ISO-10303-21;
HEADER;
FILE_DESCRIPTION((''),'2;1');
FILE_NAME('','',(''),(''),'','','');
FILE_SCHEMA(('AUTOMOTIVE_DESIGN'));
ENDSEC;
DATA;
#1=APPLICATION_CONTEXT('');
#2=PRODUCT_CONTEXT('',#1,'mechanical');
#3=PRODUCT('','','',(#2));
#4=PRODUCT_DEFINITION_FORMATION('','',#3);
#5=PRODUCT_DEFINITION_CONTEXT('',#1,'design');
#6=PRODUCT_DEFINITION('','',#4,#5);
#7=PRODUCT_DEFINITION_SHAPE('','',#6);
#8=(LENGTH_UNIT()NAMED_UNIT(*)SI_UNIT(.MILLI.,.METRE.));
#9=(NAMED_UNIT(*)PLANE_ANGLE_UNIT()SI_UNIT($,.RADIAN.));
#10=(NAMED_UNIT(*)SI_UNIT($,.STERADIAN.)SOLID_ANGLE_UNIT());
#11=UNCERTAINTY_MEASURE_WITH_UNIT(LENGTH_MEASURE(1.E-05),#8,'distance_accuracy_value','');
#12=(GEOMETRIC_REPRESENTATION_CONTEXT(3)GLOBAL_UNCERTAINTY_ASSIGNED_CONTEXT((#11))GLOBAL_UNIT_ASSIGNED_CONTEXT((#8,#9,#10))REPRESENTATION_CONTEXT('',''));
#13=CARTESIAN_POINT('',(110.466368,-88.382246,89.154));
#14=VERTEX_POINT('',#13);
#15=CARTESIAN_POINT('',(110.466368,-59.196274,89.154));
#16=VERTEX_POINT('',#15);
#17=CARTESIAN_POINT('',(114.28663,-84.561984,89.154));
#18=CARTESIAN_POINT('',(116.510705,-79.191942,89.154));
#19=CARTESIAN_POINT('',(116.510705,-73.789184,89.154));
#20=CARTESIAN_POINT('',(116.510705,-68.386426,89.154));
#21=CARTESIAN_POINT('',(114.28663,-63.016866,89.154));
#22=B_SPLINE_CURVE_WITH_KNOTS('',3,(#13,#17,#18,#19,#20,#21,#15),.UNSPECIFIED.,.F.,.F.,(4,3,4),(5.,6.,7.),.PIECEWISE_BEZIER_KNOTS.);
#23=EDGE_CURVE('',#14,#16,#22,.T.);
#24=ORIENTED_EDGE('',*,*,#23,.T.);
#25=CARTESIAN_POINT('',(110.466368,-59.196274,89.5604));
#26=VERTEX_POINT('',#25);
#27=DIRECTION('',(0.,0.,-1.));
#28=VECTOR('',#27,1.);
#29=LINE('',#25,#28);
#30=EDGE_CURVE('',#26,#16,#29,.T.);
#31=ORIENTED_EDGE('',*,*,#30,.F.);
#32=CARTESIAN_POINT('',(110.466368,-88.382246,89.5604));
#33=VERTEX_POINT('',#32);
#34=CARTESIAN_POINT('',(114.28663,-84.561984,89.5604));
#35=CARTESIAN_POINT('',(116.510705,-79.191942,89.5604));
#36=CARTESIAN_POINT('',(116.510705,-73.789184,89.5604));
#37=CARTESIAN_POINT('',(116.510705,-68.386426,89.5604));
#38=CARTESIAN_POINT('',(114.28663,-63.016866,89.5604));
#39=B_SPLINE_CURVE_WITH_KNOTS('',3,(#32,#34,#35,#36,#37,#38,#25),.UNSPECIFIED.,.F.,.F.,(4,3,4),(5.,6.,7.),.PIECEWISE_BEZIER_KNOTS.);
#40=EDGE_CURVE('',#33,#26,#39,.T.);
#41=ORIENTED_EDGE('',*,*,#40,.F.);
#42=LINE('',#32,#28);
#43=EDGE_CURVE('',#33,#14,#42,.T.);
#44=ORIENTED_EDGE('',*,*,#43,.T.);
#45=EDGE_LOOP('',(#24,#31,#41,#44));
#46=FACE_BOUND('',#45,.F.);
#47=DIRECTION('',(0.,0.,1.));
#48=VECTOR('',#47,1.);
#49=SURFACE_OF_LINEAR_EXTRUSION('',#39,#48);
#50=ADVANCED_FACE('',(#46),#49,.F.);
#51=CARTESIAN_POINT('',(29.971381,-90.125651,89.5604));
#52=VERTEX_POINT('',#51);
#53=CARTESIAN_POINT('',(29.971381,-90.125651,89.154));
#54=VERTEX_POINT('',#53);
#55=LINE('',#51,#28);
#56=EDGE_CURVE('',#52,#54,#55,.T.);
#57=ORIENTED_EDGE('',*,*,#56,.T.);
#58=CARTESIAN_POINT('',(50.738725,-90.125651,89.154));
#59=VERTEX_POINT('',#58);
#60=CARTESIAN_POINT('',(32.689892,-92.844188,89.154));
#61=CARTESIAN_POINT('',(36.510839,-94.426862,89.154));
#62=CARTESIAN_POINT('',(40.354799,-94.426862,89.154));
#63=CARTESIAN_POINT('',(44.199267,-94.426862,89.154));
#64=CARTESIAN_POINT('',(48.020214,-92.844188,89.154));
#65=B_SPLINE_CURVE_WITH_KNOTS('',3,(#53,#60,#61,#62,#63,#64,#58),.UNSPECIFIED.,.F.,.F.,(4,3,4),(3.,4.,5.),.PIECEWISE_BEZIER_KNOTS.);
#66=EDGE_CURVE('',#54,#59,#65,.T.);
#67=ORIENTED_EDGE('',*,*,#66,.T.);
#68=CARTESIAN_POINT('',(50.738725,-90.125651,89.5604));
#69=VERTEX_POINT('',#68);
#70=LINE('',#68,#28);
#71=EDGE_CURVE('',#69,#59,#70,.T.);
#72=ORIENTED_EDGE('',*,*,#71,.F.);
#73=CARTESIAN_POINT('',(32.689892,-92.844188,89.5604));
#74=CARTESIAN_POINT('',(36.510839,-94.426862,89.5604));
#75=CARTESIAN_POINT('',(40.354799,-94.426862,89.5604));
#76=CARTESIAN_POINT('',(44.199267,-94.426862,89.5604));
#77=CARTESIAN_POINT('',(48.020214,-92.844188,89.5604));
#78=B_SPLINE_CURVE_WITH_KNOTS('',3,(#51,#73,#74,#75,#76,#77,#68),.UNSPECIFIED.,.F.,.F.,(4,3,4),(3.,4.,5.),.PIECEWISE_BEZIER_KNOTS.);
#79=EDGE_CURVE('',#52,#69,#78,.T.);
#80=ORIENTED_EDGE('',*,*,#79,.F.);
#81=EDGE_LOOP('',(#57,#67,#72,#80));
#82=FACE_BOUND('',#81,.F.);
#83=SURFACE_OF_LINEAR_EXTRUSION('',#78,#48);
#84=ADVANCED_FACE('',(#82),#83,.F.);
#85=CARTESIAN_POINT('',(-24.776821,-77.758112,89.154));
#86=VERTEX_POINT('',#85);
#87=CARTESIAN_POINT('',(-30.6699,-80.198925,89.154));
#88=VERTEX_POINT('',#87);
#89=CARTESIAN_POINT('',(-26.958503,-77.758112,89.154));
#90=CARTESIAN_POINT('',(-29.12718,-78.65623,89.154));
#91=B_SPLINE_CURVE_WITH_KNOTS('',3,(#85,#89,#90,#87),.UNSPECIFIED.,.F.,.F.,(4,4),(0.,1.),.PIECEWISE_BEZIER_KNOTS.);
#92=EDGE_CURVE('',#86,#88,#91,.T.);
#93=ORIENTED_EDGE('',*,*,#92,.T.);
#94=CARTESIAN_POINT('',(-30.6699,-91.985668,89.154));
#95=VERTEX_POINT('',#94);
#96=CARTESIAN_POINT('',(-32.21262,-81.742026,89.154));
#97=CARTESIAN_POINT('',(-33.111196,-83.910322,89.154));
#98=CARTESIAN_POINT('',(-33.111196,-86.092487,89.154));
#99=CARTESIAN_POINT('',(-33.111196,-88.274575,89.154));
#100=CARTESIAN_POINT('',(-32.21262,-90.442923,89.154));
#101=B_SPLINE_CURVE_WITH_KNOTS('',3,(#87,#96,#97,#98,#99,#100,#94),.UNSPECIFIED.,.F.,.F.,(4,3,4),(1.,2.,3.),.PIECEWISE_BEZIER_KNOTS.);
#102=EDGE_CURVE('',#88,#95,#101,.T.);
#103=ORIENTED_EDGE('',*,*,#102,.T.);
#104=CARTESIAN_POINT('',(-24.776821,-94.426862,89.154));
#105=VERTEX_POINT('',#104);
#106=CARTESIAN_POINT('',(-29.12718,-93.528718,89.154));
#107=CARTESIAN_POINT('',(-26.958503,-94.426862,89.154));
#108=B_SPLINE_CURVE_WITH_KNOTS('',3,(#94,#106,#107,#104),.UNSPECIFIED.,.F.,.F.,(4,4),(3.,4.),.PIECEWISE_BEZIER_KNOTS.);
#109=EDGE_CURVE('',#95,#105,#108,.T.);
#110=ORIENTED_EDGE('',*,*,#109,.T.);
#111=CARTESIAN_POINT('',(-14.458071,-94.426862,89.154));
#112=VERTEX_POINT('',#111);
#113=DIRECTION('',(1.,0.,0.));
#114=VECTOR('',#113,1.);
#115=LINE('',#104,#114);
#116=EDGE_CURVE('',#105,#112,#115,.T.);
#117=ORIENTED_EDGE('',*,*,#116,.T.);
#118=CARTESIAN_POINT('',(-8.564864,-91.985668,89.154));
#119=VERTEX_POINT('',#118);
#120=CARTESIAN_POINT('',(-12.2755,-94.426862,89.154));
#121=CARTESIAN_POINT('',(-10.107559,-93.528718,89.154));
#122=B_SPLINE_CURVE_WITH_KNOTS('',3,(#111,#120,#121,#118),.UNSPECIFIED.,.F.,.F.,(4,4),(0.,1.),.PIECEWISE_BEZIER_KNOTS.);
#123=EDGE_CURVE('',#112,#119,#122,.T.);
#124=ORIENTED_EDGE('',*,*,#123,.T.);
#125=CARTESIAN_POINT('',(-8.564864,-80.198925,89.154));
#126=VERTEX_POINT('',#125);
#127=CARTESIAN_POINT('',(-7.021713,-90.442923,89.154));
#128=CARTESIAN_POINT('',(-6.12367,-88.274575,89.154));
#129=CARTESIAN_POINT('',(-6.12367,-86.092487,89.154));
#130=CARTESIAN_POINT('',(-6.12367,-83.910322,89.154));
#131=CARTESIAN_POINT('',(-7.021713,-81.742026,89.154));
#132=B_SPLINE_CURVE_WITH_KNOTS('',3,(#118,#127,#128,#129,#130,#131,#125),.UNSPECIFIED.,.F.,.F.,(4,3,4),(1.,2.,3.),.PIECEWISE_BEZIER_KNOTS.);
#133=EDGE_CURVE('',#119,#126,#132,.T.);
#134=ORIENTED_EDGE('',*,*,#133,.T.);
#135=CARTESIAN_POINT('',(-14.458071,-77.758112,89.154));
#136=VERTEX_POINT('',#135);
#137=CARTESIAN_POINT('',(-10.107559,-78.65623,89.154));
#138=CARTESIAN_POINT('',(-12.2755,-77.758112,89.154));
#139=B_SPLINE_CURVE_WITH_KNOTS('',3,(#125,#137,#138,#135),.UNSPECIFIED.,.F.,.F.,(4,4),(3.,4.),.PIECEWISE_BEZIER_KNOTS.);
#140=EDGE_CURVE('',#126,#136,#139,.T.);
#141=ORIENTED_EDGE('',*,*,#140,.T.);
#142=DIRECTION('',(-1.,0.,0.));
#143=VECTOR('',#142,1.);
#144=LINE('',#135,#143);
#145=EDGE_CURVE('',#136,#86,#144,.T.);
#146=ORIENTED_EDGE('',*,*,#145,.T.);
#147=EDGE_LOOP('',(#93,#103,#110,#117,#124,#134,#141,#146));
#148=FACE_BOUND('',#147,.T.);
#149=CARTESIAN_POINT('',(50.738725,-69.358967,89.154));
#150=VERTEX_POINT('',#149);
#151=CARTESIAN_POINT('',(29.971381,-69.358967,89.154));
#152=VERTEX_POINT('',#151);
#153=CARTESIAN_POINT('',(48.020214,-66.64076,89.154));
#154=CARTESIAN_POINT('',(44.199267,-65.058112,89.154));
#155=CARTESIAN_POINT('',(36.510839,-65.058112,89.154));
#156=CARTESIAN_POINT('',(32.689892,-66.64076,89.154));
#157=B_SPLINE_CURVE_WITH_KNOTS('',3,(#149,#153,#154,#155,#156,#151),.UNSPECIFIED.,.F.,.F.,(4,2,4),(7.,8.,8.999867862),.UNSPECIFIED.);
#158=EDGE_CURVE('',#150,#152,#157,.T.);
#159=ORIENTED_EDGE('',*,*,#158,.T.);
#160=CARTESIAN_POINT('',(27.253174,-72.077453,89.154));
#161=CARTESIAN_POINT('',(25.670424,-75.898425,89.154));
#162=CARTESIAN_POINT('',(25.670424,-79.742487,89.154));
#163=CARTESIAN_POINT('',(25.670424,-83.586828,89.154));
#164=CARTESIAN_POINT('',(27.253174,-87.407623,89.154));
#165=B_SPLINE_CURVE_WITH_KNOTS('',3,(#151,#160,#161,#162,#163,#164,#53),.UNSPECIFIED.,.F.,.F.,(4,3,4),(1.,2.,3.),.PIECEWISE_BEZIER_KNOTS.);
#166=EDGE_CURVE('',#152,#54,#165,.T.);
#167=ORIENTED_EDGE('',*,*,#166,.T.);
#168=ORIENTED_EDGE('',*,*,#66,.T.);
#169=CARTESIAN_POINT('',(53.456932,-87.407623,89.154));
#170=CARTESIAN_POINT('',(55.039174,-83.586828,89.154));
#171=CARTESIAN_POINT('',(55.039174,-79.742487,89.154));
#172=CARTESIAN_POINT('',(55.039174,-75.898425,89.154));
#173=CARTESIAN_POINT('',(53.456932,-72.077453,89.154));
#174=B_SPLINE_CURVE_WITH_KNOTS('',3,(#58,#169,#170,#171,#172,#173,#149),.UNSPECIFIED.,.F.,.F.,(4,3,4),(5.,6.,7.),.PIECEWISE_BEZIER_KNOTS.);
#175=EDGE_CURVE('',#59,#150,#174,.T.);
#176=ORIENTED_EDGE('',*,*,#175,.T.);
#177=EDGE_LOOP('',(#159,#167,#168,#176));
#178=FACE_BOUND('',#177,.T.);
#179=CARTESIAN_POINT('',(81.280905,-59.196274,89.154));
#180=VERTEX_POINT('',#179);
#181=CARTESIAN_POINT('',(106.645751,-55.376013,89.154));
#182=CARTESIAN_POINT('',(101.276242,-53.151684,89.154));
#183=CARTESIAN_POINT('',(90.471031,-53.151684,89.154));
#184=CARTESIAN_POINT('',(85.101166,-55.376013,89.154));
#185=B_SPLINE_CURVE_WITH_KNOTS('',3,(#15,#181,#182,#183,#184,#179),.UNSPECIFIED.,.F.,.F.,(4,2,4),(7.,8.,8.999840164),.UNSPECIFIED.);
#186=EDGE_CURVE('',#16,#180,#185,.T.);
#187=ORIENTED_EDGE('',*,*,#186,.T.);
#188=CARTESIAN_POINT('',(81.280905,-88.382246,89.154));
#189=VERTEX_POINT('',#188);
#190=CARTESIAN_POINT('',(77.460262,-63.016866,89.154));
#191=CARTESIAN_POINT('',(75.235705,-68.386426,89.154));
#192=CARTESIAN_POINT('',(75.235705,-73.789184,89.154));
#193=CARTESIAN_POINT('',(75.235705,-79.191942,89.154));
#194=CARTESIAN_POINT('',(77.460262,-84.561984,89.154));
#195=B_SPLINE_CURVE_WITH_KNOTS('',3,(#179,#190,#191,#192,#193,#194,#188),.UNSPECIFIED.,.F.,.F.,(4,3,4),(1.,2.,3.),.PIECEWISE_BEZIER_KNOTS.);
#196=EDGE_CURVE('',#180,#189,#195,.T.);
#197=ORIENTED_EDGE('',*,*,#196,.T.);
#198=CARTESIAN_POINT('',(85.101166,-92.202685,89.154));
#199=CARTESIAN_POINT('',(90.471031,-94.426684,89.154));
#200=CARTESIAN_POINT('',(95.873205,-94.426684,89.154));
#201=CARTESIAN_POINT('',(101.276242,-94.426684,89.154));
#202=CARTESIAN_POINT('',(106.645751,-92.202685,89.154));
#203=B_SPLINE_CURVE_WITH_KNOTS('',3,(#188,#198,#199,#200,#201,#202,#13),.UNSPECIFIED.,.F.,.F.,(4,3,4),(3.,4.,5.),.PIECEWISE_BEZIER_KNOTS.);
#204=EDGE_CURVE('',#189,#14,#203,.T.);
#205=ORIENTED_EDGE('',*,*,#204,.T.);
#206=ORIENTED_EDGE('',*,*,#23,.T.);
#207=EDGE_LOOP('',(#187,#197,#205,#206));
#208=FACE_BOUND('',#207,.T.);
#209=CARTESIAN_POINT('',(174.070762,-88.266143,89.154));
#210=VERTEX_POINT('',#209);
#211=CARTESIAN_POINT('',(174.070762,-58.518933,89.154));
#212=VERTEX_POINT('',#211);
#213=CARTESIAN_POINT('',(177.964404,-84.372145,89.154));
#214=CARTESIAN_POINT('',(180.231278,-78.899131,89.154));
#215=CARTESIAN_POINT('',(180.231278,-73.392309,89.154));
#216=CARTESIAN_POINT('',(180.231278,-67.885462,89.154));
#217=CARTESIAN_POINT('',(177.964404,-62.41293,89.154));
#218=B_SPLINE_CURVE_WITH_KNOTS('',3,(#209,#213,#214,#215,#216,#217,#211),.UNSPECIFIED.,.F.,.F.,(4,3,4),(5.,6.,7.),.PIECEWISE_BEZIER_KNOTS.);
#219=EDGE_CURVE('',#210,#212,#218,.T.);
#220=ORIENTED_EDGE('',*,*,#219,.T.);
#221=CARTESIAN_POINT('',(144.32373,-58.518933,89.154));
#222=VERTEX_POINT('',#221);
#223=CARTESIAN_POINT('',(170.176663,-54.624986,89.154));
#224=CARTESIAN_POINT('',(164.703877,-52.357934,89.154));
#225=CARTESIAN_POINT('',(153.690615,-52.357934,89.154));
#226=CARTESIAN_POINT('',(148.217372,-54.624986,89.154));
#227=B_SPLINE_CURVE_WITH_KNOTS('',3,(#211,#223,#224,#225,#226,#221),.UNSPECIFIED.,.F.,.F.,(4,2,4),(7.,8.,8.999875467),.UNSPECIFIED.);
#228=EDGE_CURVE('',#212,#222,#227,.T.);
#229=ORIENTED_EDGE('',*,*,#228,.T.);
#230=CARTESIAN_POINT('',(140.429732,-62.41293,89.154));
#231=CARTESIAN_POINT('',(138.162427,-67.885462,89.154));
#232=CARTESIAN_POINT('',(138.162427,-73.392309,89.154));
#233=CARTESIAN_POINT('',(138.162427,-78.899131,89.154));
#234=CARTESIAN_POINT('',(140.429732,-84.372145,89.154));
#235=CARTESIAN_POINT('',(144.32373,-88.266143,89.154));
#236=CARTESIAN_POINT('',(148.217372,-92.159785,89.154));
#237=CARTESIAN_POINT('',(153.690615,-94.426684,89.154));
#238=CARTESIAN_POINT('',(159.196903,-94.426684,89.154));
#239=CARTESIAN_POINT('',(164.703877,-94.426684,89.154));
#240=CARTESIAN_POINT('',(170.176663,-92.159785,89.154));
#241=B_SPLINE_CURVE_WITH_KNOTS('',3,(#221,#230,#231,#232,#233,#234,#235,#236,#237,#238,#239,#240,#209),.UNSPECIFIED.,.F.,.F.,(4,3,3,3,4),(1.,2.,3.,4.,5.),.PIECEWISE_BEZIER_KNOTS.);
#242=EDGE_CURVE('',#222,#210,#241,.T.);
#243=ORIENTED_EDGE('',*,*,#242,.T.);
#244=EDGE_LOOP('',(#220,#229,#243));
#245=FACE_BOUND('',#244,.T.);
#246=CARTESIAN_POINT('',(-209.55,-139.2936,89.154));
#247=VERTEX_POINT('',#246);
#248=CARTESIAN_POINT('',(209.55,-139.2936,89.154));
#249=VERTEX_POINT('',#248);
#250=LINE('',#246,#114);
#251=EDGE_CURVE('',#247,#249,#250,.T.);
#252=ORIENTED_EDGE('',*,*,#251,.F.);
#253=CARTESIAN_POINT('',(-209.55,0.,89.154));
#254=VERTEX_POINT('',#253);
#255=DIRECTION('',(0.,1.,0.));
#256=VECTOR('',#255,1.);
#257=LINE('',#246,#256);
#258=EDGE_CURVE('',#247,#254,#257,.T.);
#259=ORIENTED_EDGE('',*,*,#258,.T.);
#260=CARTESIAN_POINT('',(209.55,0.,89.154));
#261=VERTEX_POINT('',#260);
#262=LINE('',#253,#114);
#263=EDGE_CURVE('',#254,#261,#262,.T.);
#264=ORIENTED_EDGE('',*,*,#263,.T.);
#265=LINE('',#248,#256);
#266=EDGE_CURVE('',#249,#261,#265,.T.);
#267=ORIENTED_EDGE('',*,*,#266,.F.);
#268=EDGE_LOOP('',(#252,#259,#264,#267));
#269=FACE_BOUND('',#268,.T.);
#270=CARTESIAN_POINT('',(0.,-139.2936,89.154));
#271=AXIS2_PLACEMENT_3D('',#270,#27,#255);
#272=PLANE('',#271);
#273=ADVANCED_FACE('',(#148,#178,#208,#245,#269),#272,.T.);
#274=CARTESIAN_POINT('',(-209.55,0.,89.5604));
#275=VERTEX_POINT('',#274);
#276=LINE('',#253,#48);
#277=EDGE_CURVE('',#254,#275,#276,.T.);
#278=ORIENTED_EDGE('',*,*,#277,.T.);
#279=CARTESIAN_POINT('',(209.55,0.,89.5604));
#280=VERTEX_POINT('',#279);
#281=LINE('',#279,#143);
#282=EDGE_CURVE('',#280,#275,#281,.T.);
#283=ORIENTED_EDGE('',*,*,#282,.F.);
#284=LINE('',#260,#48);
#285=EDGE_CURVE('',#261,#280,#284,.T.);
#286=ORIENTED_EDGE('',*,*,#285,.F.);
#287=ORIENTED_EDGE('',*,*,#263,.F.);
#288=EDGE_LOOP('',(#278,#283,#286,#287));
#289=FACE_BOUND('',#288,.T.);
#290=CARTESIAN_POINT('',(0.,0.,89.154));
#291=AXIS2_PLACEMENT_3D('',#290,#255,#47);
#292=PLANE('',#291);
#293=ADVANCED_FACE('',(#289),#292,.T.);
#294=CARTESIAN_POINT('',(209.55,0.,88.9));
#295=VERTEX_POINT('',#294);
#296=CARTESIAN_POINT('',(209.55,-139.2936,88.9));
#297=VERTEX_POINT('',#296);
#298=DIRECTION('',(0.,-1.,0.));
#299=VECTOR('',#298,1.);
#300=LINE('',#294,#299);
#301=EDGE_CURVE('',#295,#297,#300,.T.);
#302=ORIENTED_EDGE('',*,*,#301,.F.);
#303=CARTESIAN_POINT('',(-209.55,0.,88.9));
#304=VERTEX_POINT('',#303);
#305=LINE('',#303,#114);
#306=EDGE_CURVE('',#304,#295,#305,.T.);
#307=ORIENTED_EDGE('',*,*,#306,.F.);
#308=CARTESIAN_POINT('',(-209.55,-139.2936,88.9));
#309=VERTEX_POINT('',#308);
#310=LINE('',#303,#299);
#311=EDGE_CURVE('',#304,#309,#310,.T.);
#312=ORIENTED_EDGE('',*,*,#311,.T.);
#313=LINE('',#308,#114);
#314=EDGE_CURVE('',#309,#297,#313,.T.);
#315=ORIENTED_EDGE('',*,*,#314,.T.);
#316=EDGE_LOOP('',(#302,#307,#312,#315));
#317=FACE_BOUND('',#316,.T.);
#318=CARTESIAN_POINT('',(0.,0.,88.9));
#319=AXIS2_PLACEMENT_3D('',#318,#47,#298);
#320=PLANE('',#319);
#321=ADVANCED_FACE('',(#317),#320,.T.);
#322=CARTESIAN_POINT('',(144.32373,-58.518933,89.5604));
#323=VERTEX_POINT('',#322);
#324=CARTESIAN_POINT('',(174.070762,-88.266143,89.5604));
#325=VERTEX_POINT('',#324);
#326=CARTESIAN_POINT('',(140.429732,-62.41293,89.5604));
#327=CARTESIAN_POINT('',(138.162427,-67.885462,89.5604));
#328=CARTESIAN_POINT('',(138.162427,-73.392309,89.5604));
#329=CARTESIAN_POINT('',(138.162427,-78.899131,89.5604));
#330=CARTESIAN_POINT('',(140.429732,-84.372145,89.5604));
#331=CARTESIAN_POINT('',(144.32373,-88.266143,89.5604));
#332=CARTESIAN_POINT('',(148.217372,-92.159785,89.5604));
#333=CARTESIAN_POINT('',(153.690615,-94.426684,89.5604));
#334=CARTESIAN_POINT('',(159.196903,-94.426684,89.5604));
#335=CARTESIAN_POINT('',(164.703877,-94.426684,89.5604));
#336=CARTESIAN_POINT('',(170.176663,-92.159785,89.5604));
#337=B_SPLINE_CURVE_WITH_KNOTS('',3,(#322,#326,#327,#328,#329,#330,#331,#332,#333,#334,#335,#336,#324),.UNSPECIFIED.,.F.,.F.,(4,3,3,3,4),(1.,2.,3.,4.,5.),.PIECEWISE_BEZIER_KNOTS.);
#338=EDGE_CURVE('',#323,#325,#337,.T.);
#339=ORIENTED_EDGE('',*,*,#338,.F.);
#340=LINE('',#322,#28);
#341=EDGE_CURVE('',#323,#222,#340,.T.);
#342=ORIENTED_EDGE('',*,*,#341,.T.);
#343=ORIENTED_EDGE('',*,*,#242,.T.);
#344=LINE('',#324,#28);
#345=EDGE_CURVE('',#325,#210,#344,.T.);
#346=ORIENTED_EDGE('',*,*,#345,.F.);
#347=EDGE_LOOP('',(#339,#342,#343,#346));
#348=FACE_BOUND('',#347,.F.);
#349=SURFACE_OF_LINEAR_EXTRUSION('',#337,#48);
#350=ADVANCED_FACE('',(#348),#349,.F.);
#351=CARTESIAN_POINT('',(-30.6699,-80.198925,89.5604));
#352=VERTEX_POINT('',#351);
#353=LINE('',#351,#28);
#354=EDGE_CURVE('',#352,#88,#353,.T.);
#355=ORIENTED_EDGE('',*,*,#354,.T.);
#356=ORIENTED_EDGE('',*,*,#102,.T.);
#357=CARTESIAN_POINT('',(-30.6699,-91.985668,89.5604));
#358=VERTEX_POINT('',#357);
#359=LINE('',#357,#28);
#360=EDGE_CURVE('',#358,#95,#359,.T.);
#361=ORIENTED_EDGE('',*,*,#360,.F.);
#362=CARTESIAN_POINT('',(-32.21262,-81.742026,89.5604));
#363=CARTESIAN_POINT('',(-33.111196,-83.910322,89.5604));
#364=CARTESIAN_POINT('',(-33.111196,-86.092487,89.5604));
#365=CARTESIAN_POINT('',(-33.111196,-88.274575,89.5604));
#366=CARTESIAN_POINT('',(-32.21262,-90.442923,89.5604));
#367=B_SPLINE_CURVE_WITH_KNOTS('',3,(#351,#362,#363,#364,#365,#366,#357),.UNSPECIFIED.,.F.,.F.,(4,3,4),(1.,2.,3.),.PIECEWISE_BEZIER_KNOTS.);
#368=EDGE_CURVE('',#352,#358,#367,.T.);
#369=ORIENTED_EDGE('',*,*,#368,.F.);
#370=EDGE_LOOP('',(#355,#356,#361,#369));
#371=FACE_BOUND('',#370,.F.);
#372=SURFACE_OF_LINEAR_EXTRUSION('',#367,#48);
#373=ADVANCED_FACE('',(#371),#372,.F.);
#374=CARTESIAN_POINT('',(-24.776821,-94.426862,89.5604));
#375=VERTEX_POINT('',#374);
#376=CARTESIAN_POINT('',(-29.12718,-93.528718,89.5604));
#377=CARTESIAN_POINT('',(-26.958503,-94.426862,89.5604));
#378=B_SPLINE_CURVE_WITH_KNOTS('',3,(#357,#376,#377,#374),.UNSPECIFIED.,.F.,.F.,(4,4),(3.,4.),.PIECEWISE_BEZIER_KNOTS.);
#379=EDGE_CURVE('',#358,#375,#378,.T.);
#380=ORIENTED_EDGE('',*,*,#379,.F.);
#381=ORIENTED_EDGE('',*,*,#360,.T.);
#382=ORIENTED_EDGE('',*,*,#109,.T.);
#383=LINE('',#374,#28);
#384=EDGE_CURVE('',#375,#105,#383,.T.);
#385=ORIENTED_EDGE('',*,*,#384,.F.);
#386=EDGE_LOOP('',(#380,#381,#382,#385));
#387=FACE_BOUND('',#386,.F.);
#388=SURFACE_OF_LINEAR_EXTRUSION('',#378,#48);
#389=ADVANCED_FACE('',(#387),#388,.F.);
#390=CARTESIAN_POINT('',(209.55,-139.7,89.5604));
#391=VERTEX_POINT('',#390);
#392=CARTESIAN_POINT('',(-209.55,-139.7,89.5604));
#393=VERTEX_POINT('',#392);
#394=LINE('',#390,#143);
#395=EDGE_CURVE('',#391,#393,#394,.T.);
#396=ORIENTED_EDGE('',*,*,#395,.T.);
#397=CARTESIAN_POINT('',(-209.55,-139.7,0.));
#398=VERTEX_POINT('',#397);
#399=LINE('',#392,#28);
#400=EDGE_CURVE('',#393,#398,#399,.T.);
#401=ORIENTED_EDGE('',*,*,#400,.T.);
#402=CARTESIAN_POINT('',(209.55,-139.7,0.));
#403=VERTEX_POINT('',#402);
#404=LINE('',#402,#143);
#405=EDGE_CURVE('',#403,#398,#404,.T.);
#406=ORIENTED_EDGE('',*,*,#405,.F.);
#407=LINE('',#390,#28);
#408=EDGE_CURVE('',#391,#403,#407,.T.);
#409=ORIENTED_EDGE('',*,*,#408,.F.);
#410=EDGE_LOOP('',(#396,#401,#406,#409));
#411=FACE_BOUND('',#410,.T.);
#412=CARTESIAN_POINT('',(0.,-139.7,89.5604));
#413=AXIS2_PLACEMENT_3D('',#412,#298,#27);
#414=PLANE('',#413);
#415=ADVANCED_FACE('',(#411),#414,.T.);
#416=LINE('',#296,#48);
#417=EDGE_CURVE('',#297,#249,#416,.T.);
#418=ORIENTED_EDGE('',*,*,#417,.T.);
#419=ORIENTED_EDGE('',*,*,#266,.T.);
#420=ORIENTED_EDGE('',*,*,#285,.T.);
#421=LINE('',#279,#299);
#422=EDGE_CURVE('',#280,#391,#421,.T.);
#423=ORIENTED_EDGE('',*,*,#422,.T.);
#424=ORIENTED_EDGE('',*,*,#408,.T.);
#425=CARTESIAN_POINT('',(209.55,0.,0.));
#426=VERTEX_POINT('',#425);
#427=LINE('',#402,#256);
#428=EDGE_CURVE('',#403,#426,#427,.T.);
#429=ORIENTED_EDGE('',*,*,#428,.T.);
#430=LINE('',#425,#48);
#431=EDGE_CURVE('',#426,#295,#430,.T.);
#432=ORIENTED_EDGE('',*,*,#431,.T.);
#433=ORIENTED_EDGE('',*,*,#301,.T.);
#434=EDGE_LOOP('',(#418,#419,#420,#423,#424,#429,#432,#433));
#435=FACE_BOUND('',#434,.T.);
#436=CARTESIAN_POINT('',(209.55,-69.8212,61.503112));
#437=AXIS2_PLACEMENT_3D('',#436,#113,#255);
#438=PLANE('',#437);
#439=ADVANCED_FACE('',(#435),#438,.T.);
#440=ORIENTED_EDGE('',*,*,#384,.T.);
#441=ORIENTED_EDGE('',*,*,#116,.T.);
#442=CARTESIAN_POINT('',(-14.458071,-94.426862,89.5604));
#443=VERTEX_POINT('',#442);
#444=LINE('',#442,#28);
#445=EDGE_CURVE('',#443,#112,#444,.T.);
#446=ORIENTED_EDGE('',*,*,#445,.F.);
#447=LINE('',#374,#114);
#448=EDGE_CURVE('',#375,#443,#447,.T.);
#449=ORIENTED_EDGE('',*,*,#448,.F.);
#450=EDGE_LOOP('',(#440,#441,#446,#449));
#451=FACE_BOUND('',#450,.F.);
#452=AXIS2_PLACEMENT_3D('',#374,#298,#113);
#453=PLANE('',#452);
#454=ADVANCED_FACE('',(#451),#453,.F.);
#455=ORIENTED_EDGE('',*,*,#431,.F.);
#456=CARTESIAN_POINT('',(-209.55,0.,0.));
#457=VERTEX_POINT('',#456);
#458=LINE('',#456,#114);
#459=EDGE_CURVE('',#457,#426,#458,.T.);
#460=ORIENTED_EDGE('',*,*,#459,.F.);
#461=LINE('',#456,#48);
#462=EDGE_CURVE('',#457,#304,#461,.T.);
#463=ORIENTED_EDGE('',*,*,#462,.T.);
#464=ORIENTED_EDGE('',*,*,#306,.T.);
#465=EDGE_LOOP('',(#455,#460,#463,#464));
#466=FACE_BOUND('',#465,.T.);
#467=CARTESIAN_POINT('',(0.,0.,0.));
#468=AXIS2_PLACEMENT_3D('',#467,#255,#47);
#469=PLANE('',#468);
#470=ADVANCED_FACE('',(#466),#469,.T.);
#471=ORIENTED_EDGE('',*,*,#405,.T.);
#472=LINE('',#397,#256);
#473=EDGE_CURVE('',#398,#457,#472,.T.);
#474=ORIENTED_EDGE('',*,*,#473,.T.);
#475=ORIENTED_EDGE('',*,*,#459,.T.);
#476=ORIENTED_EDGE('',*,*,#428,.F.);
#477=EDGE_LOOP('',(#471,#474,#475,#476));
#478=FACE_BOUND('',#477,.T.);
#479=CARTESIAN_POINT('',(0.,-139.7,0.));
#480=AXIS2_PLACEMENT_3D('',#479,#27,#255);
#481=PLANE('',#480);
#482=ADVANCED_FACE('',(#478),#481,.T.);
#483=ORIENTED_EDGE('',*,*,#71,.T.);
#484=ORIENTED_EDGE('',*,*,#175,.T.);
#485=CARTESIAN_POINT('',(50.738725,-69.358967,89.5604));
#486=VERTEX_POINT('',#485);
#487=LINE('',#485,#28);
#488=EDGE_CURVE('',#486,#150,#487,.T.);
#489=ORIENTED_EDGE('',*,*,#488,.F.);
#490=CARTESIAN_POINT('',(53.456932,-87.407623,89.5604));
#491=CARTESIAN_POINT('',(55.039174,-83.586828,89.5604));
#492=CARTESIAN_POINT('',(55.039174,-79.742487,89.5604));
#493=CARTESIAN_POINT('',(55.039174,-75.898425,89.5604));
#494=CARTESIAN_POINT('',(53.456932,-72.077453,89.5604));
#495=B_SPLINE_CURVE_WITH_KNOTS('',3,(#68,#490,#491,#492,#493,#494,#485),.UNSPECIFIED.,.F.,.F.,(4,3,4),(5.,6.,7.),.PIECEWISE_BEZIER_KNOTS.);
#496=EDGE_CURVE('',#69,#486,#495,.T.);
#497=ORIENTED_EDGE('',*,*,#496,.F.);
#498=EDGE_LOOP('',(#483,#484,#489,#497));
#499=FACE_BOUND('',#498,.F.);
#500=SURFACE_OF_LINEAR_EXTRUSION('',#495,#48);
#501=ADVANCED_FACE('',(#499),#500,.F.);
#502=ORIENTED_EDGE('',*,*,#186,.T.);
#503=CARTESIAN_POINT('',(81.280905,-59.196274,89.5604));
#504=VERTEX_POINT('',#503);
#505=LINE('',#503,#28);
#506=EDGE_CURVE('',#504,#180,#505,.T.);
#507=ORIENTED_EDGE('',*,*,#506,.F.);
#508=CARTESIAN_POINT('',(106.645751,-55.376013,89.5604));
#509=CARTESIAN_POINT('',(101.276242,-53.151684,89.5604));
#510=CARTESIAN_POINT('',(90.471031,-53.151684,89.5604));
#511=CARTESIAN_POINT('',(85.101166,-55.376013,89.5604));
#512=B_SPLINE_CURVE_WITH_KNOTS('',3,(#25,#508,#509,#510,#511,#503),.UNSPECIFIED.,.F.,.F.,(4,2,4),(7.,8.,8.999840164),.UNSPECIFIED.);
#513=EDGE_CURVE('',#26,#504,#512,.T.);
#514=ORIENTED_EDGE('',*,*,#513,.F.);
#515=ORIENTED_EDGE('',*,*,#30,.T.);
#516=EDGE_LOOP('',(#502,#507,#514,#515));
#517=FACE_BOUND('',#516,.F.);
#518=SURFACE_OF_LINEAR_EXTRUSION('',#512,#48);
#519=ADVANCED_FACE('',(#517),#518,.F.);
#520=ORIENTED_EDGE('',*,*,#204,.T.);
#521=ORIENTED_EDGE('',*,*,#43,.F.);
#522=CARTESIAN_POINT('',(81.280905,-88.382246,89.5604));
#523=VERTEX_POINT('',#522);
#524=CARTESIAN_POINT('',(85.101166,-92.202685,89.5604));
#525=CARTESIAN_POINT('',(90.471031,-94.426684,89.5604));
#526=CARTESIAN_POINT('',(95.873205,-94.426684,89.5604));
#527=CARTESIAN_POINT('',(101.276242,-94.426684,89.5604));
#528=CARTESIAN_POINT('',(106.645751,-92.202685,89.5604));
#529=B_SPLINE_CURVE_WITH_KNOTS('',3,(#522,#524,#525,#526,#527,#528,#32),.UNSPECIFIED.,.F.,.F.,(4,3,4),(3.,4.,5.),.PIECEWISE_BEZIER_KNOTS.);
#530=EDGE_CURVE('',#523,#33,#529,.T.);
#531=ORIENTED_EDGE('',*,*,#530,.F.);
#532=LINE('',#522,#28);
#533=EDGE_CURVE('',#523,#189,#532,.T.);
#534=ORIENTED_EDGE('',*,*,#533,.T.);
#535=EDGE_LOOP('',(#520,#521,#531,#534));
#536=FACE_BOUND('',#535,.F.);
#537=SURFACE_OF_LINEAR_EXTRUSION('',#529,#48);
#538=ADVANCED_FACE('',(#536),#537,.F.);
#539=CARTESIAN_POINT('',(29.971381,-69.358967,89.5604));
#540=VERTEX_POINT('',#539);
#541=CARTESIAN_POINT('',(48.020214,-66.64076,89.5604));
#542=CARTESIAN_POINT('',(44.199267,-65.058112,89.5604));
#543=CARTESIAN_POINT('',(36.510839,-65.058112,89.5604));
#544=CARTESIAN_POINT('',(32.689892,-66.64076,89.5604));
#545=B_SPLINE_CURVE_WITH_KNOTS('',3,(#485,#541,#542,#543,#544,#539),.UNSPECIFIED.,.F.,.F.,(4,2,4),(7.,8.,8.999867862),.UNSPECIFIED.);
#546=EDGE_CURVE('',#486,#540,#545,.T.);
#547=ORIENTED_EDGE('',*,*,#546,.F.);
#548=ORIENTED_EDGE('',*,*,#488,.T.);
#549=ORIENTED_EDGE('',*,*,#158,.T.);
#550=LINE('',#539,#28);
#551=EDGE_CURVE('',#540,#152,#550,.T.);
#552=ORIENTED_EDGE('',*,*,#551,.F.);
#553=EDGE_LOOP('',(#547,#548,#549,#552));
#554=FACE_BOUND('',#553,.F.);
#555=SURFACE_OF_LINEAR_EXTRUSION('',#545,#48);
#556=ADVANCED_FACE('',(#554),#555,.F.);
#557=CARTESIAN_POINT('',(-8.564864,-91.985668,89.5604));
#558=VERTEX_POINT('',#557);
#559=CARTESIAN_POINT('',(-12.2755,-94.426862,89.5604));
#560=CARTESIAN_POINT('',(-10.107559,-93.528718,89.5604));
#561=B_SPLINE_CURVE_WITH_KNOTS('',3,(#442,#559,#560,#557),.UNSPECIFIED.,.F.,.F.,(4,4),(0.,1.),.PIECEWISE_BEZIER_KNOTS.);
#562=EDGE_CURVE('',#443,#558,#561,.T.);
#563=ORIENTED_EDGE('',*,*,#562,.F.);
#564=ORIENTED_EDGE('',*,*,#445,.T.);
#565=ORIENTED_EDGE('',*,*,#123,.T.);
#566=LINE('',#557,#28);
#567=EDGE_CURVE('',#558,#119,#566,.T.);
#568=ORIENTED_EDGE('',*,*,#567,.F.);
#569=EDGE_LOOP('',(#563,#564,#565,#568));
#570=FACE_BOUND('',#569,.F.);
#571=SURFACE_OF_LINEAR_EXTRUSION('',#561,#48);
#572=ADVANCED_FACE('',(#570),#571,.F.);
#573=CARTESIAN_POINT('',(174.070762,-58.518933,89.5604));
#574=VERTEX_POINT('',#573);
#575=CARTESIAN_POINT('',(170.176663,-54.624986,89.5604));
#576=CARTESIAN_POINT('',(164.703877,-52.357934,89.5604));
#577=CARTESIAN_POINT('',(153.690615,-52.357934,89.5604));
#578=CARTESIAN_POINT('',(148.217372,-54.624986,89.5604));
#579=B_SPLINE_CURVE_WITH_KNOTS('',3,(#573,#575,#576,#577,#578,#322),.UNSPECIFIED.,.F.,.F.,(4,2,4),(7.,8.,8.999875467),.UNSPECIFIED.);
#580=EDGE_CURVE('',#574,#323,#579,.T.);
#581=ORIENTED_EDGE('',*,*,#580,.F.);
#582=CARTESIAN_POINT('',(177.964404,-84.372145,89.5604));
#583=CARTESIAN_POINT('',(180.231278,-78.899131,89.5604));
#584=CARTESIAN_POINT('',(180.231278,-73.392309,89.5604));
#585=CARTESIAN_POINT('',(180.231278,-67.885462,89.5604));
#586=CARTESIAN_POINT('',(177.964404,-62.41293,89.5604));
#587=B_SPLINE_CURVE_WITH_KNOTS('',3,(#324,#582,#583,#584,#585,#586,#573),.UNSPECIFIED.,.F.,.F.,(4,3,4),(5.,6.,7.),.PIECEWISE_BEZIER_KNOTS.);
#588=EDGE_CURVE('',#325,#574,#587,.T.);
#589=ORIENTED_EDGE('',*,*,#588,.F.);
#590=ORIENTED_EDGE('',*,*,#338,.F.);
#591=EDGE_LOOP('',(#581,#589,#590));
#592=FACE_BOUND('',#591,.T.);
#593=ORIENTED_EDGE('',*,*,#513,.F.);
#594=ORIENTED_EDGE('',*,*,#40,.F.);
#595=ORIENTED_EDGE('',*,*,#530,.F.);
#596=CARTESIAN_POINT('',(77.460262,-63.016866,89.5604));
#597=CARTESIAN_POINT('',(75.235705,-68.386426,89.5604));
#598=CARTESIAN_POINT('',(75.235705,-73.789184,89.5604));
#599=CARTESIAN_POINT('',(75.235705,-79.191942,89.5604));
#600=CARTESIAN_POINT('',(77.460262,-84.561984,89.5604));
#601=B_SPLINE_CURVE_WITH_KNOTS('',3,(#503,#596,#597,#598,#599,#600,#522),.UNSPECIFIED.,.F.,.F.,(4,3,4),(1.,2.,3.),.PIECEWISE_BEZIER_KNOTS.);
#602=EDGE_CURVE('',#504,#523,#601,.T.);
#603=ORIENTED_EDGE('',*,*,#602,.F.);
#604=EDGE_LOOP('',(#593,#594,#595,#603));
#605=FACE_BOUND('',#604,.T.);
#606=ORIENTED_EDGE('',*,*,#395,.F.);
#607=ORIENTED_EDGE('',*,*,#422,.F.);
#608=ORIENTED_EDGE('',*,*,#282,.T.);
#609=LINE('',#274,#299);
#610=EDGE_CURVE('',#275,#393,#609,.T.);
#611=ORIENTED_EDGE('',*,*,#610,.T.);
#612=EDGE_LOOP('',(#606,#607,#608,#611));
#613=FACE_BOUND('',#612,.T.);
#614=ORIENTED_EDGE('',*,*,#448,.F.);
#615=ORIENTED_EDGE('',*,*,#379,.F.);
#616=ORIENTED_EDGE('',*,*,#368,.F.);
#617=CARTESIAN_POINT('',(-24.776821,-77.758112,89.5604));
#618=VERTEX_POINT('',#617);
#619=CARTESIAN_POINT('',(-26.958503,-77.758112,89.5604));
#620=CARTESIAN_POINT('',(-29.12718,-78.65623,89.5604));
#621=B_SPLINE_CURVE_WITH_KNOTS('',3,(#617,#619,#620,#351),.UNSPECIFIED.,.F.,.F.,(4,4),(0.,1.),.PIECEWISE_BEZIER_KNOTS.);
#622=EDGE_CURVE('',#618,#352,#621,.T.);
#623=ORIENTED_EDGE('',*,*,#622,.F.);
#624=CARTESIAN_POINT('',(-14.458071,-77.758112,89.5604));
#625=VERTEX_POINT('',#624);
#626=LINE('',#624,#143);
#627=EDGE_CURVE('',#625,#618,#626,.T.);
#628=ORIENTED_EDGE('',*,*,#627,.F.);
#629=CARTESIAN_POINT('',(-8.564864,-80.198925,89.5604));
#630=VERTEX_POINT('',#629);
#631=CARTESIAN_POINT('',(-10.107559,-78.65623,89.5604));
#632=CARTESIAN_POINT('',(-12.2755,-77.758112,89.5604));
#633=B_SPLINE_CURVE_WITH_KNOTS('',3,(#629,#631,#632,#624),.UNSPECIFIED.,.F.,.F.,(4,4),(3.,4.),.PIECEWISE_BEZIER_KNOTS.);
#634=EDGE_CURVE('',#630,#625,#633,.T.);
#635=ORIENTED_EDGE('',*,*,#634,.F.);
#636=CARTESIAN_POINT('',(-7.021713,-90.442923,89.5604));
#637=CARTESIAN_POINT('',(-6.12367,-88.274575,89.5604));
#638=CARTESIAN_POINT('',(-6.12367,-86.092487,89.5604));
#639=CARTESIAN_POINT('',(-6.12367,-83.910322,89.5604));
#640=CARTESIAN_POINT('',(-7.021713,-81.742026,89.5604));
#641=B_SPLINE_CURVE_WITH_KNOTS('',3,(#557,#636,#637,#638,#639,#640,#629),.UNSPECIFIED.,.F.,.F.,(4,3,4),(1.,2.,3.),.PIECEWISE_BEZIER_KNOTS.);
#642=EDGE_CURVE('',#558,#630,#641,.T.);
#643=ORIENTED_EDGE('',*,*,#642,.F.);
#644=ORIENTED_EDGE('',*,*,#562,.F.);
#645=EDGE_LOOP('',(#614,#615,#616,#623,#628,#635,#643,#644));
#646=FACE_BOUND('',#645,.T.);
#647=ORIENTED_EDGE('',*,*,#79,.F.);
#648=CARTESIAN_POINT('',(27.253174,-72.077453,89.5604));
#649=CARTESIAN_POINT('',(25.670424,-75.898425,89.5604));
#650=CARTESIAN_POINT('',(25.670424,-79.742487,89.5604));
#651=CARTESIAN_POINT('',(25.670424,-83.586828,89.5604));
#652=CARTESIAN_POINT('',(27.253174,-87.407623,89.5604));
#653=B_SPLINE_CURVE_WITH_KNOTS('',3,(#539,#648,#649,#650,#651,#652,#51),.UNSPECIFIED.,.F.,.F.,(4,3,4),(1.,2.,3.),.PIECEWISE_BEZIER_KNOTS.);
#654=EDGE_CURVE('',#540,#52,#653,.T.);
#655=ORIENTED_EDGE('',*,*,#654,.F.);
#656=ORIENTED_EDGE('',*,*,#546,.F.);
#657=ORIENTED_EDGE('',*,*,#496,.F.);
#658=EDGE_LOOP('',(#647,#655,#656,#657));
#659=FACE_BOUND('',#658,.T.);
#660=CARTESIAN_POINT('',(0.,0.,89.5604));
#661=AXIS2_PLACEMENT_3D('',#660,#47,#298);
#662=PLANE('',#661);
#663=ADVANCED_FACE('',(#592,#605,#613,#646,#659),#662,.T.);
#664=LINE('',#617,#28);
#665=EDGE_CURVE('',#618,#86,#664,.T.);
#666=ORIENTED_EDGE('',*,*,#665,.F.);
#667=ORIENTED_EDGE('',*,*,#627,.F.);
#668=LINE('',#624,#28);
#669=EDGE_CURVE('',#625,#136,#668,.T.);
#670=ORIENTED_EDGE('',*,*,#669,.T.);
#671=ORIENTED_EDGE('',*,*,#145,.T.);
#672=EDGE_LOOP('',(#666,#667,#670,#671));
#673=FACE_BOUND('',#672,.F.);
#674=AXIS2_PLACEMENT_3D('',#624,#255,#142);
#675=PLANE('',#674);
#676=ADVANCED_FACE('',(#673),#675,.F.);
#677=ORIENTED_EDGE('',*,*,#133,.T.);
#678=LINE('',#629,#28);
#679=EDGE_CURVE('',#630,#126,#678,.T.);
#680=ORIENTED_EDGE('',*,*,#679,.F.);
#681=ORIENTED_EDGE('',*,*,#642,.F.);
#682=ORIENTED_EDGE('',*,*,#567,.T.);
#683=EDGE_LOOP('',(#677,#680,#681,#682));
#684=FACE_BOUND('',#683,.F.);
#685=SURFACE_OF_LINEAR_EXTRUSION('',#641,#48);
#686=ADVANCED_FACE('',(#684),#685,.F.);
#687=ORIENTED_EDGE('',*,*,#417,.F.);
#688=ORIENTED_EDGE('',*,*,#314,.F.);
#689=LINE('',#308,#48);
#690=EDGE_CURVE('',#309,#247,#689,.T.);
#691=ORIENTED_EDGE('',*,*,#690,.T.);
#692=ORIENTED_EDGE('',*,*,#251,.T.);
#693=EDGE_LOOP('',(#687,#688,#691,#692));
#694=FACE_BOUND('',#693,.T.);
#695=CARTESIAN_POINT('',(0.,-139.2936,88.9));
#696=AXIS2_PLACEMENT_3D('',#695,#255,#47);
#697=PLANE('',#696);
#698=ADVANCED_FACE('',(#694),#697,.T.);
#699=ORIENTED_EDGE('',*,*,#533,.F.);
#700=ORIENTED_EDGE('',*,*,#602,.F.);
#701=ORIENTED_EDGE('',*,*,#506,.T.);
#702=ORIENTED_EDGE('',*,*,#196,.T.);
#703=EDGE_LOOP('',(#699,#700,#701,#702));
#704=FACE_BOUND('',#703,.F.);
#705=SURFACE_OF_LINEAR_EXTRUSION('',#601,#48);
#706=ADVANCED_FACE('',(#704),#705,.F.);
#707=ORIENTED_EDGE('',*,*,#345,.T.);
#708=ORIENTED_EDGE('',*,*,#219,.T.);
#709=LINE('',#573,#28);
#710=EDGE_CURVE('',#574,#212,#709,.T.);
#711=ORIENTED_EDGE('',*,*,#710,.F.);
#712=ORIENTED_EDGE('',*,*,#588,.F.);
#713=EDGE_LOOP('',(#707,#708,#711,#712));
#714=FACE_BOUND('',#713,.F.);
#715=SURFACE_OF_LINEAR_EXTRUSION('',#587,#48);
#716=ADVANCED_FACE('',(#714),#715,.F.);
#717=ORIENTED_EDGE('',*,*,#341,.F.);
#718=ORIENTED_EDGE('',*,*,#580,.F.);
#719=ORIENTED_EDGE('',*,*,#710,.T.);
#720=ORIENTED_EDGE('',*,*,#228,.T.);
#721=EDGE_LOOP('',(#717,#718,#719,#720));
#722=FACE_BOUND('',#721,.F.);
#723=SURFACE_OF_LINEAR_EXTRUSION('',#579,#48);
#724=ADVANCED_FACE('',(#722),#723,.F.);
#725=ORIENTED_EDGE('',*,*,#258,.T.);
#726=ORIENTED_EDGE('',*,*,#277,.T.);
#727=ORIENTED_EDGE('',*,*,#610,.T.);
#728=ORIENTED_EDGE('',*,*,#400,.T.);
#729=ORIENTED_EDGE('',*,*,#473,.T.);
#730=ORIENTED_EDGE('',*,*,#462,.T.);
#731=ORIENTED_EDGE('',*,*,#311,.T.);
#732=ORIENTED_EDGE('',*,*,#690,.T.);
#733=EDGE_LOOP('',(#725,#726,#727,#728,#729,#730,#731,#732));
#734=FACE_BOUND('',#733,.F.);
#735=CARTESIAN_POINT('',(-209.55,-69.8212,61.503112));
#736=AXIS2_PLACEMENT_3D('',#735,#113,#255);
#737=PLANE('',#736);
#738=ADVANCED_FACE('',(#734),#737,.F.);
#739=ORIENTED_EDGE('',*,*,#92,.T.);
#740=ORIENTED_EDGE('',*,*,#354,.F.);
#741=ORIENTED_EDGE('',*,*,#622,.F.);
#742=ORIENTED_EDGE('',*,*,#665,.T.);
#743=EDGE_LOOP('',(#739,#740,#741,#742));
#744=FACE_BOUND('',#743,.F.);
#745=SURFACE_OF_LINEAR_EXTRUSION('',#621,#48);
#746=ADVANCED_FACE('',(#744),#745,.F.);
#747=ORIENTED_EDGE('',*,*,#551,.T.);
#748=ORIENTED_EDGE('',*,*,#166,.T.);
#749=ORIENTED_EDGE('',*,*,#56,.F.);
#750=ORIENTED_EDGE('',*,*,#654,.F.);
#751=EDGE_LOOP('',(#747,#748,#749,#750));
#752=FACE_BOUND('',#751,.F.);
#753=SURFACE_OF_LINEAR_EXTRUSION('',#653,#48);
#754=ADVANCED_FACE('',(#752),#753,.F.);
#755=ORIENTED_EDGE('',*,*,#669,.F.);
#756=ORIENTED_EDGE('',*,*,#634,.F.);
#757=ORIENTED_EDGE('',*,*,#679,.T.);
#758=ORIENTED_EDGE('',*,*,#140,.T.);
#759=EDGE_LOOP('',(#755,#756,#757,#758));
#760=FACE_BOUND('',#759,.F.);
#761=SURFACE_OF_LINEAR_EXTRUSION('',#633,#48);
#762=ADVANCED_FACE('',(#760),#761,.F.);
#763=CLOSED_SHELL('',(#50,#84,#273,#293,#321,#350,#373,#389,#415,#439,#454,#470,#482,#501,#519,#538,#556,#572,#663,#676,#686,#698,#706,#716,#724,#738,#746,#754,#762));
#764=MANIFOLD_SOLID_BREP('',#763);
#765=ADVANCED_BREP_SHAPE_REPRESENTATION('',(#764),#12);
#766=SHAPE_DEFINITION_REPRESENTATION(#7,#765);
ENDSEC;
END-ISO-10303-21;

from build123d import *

# Parameters (mm, degrees)
F1_DEPTH = 209.55
F3_DEPTH = 0.4064


# Not quite as in the source:
# - the dataset's text gives a spline's control points without its knots; the knots are read off the source's solid


with BuildPart() as f1:
    # F0 (on Right) → F1 (new body, symmetric)
    with BuildSketch(Plane.YZ):
        Polygon((-139.7, 0), (0, 0), (0, 88.9), (-139.2936, 88.9), (-139.2936, 89.154), (0, 89.154), (0, 89.5604), (-139.7, 89.5604), align=None)
    extrude(amount=F1_DEPTH, both=True)

    # F2 (on face) → F3 (cut, through all)
    with BuildSketch(Plane.XY.offset(89.5604)):
        with BuildLine():
            add(Edge.make_bspline(
                [(-30.6699001032, -91.9856678392), (-29.1271803032, -93.5287178392), (-26.9585029032, -94.4268618392), (-24.7768207032, -94.4268618392)],
                knots=[3, 3, 3, 3, 4, 4, 4, 4], degree=3))
            Line((-24.7768207032, -94.4268618392), (-14.4580707032, -94.4268618392))
            add(Edge.make_bspline(
                [(-14.4580707032, -94.4268618392), (-12.2754995032, -94.4268618392), (-10.1075587032, -93.5287178392), (-8.5648643032, -91.9856678392)],
                knots=[0, 0, 0, 0, 1, 1, 1, 1], degree=3))
            add(Edge.make_bspline(
                [(-8.5648643032, -91.9856678392), (-7.0217127032, -90.4429226392), (-6.1236703032, -88.2745754392), (-6.1236703032, -86.0924868392), (-6.1236703032, -83.9103220392), (-7.0217127032, -81.7420256392), (-8.5648643032, -80.1989248392)],
                knots=[1, 1, 1, 1, 2, 2, 2, 3, 3, 3, 3], degree=3))
            add(Edge.make_bspline(
                [(-8.5648643032, -80.1989248392), (-10.1075587032, -78.6562304392), (-12.2754995032, -77.7581118392), (-14.4580707032, -77.7581118392)],
                knots=[3, 3, 3, 3, 4, 4, 4, 4], degree=3))
            Line((-14.4580707032, -77.7581118392), (-24.7768207032, -77.7581118392))
            add(Edge.make_bspline(
                [(-24.7768207032, -77.7581118392), (-26.9585029032, -77.7581118392), (-29.1271803032, -78.6562304392), (-30.6699001032, -80.1989248392)],
                knots=[0, 0, 0, 0, 1, 1, 1, 1], degree=3))
            add(Edge.make_bspline(
                [(-30.6699001032, -80.1989248392), (-32.2126199032, -81.7420256392), (-33.1111957032, -83.9103220392), (-33.1111957032, -86.0924868392), (-33.1111957032, -88.2745754392), (-32.2126199032, -90.4429226392), (-30.6699001032, -91.9856678392)],
                knots=[1, 1, 1, 1, 2, 2, 2, 3, 3, 3, 3], degree=3))
        make_face()
        with BuildLine():
            add(Edge.make_bspline(
                [(50.7387254968, -69.3589668392), (48.0202142968, -66.6407604392), (44.1992668968, -65.0581118392), (40.3547990968, -65.0581118392)],
                knots=[7, 7, 7, 7, 8, 8, 8, 8], degree=3))
            add(Edge.make_bspline(
                [(40.3547990968, -65.0581118392), (36.5108392968, -65.0581118392), (32.6898918968, -66.6407604392), (29.9713806968, -69.3589668392)],
                knots=[0, 0, 0, 0, 1, 1, 1, 1], degree=3))
            add(Edge.make_bspline(
                [(29.9713806968, -69.3589668392), (27.2531742968, -72.0774526392), (25.6704240968, -75.8984254392), (25.6704240968, -79.7424868392), (25.6704240968, -83.5868276392), (27.2531742968, -87.4076226392), (29.9713806968, -90.1256512392)],
                knots=[1, 1, 1, 1, 2, 2, 2, 3, 3, 3, 3], degree=3))
            add(Edge.make_bspline(
                [(29.9713806968, -90.1256512392), (32.6898918968, -92.8441878392), (36.5108392968, -94.4268618392), (40.3547990968, -94.4268618392), (44.1992668968, -94.4268618392), (48.0202142968, -92.8441878392), (50.7387254968, -90.1256512392)],
                knots=[3, 3, 3, 3, 4, 4, 4, 5, 5, 5, 5], degree=3))
            add(Edge.make_bspline(
                [(50.7387254968, -90.1256512392), (53.4569318968, -87.4076226392), (55.0391740968, -83.5868276392), (55.0391740968, -79.7424868392), (55.0391740968, -75.8984254392), (53.4569318968, -72.0774526392), (50.7387254968, -69.3589668392)],
                knots=[5, 5, 5, 5, 6, 6, 6, 7, 7, 7, 7], degree=3))
        make_face()
        with BuildLine():
            add(Edge.make_bspline(
                [(110.4663682968, -59.1962744392), (106.6457510968, -55.3760128392), (101.2762418968, -53.1516840392), (95.8732046968, -53.1516840392)],
                knots=[7, 7, 7, 7, 8, 8, 8, 8], degree=3))
            add(Edge.make_bspline(
                [(95.8732046968, -53.1516840392), (90.4710310968, -53.1516840392), (85.1011662968, -55.3760128392), (81.2809046968, -59.1962744392)],
                knots=[0, 0, 0, 0, 1, 1, 1, 1], degree=3))
            add(Edge.make_bspline(
                [(81.2809046968, -59.1962744392), (77.4602620968, -63.0168662392), (75.2357046968, -68.3864262392), (75.2357046968, -73.7891840392), (75.2357046968, -79.1919418392), (77.4602620968, -84.5619844392), (81.2809046968, -88.3822460392)],
                knots=[1, 1, 1, 1, 2, 2, 2, 3, 3, 3, 3], degree=3))
            add(Edge.make_bspline(
                [(81.2809046968, -88.3822460392), (85.1011662968, -92.2026854392), (90.4710310968, -94.4266840392), (95.8732046968, -94.4266840392), (101.2762418968, -94.4266840392), (106.6457510968, -92.2026854392), (110.4663682968, -88.3822460392)],
                knots=[3, 3, 3, 3, 4, 4, 4, 5, 5, 5, 5], degree=3))
            add(Edge.make_bspline(
                [(110.4663682968, -88.3822460392), (114.2866298968, -84.5619844392), (116.5107046968, -79.1919418392), (116.5107046968, -73.7891840392), (116.5107046968, -68.3864262392), (114.2866298968, -63.0168662392), (110.4663682968, -59.1962744392)],
                knots=[5, 5, 5, 5, 6, 6, 6, 7, 7, 7, 7], degree=3))
        make_face()
        with BuildLine():
            add(Edge.make_bspline(
                [(174.0707622968, -58.5189326392), (170.1766628968, -54.6249856392), (164.7038772968, -52.3579340392), (159.1969032968, -52.3579340392)],
                knots=[7, 7, 7, 7, 8, 8, 8, 8], degree=3))
            add(Edge.make_bspline(
                [(159.1969032968, -52.3579340392), (153.6906150968, -52.3579340392), (148.2173722968, -54.6249856392), (144.3237300968, -58.5189326392)],
                knots=[0, 0, 0, 0, 1, 1, 1, 1], degree=3))
            add(Edge.make_bspline(
                [(144.3237300968, -58.5189326392), (140.4297322968, -62.4129304392), (138.1624266968, -67.8854620392), (138.1624266968, -73.3923090392), (138.1624266968, -78.8991306392), (140.4297322968, -84.3721448392), (144.3237300968, -88.2661426392), (148.2173722968, -92.1597848392), (153.6906150968, -94.4266840392), (159.1969032968, -94.4266840392), (164.7038772968, -94.4266840392), (170.1766628968, -92.1597848392), (174.0707622968, -88.2661426392)],
                knots=[1, 1, 1, 1, 2, 2, 2, 3, 3, 3, 4, 4, 4, 5, 5, 5, 5], degree=3))
            add(Edge.make_bspline(
                [(174.0707622968, -88.2661426392), (177.9644044968, -84.3721448392), (180.2312782968, -78.8991306392), (180.2312782968, -73.3923090392), (180.2312782968, -67.8854620392), (177.9644044968, -62.4129304392), (174.0707622968, -58.5189326392)],
                knots=[5, 5, 5, 5, 6, 6, 6, 7, 7, 7, 7], degree=3))
        make_face()
    extrude(amount=-F3_DEPTH, mode=Mode.SUBTRACT)


solid = f1.part
